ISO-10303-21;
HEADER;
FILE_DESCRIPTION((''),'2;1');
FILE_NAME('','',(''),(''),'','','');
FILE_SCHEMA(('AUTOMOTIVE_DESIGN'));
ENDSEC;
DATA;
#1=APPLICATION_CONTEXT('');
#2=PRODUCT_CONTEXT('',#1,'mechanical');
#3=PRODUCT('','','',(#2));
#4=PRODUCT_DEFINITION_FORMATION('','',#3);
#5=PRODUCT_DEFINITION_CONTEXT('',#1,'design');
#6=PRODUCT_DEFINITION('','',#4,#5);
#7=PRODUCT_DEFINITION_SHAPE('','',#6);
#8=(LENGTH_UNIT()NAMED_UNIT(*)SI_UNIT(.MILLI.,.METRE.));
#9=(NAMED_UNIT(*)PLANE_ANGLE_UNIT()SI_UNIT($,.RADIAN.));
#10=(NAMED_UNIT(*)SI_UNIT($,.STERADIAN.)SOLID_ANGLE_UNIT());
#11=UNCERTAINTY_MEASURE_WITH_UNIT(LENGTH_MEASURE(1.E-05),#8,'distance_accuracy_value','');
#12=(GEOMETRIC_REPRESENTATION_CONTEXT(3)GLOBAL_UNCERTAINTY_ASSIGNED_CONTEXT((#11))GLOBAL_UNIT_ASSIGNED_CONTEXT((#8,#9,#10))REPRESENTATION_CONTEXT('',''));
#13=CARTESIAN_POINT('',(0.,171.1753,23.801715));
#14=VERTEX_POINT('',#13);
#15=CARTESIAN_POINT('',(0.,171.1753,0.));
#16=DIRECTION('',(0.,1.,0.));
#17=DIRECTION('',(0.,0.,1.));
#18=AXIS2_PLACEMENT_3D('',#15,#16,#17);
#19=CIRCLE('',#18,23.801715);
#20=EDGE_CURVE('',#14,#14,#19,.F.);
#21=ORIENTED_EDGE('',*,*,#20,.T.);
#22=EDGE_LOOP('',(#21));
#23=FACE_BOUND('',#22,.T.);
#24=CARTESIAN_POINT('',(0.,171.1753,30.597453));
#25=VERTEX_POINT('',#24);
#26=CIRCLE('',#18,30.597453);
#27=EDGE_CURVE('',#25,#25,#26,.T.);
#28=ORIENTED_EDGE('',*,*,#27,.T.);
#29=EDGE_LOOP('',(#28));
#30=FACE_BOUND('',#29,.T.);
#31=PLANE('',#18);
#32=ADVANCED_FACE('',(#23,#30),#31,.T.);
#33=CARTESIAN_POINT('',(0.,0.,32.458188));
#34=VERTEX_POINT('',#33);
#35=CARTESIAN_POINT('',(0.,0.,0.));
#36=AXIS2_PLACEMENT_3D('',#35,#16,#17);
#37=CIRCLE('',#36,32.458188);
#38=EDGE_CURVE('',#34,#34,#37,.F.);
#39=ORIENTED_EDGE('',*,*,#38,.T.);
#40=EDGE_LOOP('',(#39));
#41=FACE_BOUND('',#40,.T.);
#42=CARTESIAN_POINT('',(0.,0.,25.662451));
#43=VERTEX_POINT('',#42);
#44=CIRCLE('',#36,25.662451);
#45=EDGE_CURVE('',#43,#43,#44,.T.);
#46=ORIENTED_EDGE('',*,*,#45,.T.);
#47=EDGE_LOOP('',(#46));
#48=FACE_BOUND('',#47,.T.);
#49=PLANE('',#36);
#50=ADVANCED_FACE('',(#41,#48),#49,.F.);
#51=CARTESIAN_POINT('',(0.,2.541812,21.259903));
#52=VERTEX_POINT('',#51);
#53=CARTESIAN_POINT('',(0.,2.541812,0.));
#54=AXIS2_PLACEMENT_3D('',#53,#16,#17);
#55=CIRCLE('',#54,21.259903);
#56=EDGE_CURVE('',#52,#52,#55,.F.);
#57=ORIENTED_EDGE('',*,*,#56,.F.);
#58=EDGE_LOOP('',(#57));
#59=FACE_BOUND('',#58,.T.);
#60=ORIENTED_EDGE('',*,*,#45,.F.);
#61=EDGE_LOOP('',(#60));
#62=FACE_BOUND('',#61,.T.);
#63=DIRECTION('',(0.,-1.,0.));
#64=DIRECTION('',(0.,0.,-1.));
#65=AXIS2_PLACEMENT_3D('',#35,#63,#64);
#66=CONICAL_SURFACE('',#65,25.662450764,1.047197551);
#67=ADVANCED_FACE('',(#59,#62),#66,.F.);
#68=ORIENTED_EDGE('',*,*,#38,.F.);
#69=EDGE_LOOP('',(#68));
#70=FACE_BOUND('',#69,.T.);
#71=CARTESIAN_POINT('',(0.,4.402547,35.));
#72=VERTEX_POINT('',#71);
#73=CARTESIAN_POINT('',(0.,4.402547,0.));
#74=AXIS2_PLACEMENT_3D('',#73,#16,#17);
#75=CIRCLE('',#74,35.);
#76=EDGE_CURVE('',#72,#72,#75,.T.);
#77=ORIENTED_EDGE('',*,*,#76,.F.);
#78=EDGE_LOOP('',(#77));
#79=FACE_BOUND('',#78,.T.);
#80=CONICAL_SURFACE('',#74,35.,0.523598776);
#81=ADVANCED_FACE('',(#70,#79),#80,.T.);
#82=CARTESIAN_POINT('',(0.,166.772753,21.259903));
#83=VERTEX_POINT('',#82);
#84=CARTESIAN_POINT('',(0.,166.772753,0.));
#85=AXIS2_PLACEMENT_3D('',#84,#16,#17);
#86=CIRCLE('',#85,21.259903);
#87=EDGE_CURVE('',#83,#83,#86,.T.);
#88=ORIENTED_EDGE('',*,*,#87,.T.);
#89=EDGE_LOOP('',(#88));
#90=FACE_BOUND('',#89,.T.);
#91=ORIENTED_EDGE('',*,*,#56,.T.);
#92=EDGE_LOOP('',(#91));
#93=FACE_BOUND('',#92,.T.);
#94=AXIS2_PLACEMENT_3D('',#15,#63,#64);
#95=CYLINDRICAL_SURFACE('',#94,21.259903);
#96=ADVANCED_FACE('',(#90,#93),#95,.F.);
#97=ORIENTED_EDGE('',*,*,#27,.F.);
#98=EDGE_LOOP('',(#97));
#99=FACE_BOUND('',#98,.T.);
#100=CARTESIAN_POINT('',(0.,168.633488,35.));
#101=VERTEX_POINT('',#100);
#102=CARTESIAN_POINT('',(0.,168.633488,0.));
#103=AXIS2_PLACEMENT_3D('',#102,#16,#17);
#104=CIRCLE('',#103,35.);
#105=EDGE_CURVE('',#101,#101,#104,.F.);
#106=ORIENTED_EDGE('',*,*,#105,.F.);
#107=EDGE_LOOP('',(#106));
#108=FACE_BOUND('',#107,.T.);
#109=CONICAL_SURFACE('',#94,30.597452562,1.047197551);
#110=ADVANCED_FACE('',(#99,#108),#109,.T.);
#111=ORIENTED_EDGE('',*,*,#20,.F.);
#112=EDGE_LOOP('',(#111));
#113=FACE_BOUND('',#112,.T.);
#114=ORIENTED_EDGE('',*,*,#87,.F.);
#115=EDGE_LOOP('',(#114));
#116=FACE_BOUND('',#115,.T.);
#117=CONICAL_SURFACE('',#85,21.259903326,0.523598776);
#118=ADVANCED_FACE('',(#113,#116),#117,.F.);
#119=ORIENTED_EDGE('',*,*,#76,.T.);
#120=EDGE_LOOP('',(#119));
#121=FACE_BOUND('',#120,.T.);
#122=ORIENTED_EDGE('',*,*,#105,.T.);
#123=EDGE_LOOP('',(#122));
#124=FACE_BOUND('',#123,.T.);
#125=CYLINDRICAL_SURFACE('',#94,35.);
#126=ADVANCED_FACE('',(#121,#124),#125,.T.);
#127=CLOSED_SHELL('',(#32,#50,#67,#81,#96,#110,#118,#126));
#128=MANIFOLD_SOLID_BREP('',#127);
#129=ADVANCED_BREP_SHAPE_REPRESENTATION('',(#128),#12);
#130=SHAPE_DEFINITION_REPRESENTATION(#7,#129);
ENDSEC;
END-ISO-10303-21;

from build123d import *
from OCP.BRepFilletAPI import BRepFilletAPI_MakeChamfer

# Parameters (mm, degrees)
SKETCH1_R           = 35
BOSS_EXTRUDE1_DEPTH = 171.175300097
SKETCH2_R           = 21.259903326
CUT_EXTRUDE1_DEPTH  = 179.188056175
CHAMFER1_SIZE       = 2.541811948
CHAMFER1_SIZE2      = 4.402547438


with BuildPart() as part:
    # Sketch1 → Boss-Extrude1 (new body)
    with BuildSketch(Plane(origin=(0, 0, 0), x_dir=(1, 0, 0), z_dir=(0, 1, 0))):
        Circle(SKETCH1_R)
    extrude(amount=BOSS_EXTRUDE1_DEPTH)

    # Sketch2 → Cut-Extrude1 (cut, through all)
    with BuildSketch(Plane(origin=(0, 0, 0), x_dir=(1, 0, 0), z_dir=(0, 1, 0))):
        Circle(SKETCH2_R)
    extrude(amount=CUT_EXTRUDE1_DEPTH, mode=Mode.SUBTRACT)

    # Chamfer1: one chamfer whose edges measure the first distance from different faces: ONE call of the kernel's chamfer builder (chamfer() names one face for all edges)
    chamfer1_edges_1 = [part.edges().sort_by_distance(p)[0] for p in [
        (-21.259903326, 171.175300097, 0),
    ]]
    chamfer1_side_1 = [part.faces().sort_by_distance(p)[0] for p in [
        (-34.010050506, 171.175300097, 0),
    ]]
    chamfer1_edges_2 = [part.edges().sort_by_distance(p)[0] for p in [
        (-21.259903326, 0, 0),
    ]]
    chamfer1_side_2 = [part.faces().sort_by_distance(p)[0] for p in [
        (-21.259903326, 85.587650048, 0),
    ]]
    chamfer1_edges_3 = [part.edges().sort_by_distance(p)[0] for p in [
        (-35, 0, 0),
    ]]
    chamfer1_side_3 = [part.faces().sort_by_distance(p)[0] for p in [
        (-34.010050506, 0, 0),
    ]]
    chamfer1_edges_4 = [part.edges().sort_by_distance(p)[0] for p in [
        (-35, 171.175300097, 0),
    ]]
    chamfer1_side_4 = [part.faces().sort_by_distance(p)[0] for p in [
        (-35, 85.587650048, 0),
    ]]
    chamfer1 = BRepFilletAPI_MakeChamfer(part.part.solid().wrapped)
    for e in chamfer1_edges_1:
        chamfer1.Add(CHAMFER1_SIZE, CHAMFER1_SIZE2, e.wrapped, chamfer1_side_1[0].wrapped)  # the first distance lies on this face
    for e in chamfer1_edges_2:
        chamfer1.Add(CHAMFER1_SIZE, CHAMFER1_SIZE2, e.wrapped, chamfer1_side_2[0].wrapped)  # the first distance lies on this face
    for e in chamfer1_edges_3:
        chamfer1.Add(CHAMFER1_SIZE, CHAMFER1_SIZE2, e.wrapped, chamfer1_side_3[0].wrapped)  # the first distance lies on this face
    for e in chamfer1_edges_4:
        chamfer1.Add(CHAMFER1_SIZE, CHAMFER1_SIZE2, e.wrapped, chamfer1_side_4[0].wrapped)  # the first distance lies on this face
    add(Compound.cast(chamfer1.Shape()), mode=Mode.REPLACE)


solid = part.part
